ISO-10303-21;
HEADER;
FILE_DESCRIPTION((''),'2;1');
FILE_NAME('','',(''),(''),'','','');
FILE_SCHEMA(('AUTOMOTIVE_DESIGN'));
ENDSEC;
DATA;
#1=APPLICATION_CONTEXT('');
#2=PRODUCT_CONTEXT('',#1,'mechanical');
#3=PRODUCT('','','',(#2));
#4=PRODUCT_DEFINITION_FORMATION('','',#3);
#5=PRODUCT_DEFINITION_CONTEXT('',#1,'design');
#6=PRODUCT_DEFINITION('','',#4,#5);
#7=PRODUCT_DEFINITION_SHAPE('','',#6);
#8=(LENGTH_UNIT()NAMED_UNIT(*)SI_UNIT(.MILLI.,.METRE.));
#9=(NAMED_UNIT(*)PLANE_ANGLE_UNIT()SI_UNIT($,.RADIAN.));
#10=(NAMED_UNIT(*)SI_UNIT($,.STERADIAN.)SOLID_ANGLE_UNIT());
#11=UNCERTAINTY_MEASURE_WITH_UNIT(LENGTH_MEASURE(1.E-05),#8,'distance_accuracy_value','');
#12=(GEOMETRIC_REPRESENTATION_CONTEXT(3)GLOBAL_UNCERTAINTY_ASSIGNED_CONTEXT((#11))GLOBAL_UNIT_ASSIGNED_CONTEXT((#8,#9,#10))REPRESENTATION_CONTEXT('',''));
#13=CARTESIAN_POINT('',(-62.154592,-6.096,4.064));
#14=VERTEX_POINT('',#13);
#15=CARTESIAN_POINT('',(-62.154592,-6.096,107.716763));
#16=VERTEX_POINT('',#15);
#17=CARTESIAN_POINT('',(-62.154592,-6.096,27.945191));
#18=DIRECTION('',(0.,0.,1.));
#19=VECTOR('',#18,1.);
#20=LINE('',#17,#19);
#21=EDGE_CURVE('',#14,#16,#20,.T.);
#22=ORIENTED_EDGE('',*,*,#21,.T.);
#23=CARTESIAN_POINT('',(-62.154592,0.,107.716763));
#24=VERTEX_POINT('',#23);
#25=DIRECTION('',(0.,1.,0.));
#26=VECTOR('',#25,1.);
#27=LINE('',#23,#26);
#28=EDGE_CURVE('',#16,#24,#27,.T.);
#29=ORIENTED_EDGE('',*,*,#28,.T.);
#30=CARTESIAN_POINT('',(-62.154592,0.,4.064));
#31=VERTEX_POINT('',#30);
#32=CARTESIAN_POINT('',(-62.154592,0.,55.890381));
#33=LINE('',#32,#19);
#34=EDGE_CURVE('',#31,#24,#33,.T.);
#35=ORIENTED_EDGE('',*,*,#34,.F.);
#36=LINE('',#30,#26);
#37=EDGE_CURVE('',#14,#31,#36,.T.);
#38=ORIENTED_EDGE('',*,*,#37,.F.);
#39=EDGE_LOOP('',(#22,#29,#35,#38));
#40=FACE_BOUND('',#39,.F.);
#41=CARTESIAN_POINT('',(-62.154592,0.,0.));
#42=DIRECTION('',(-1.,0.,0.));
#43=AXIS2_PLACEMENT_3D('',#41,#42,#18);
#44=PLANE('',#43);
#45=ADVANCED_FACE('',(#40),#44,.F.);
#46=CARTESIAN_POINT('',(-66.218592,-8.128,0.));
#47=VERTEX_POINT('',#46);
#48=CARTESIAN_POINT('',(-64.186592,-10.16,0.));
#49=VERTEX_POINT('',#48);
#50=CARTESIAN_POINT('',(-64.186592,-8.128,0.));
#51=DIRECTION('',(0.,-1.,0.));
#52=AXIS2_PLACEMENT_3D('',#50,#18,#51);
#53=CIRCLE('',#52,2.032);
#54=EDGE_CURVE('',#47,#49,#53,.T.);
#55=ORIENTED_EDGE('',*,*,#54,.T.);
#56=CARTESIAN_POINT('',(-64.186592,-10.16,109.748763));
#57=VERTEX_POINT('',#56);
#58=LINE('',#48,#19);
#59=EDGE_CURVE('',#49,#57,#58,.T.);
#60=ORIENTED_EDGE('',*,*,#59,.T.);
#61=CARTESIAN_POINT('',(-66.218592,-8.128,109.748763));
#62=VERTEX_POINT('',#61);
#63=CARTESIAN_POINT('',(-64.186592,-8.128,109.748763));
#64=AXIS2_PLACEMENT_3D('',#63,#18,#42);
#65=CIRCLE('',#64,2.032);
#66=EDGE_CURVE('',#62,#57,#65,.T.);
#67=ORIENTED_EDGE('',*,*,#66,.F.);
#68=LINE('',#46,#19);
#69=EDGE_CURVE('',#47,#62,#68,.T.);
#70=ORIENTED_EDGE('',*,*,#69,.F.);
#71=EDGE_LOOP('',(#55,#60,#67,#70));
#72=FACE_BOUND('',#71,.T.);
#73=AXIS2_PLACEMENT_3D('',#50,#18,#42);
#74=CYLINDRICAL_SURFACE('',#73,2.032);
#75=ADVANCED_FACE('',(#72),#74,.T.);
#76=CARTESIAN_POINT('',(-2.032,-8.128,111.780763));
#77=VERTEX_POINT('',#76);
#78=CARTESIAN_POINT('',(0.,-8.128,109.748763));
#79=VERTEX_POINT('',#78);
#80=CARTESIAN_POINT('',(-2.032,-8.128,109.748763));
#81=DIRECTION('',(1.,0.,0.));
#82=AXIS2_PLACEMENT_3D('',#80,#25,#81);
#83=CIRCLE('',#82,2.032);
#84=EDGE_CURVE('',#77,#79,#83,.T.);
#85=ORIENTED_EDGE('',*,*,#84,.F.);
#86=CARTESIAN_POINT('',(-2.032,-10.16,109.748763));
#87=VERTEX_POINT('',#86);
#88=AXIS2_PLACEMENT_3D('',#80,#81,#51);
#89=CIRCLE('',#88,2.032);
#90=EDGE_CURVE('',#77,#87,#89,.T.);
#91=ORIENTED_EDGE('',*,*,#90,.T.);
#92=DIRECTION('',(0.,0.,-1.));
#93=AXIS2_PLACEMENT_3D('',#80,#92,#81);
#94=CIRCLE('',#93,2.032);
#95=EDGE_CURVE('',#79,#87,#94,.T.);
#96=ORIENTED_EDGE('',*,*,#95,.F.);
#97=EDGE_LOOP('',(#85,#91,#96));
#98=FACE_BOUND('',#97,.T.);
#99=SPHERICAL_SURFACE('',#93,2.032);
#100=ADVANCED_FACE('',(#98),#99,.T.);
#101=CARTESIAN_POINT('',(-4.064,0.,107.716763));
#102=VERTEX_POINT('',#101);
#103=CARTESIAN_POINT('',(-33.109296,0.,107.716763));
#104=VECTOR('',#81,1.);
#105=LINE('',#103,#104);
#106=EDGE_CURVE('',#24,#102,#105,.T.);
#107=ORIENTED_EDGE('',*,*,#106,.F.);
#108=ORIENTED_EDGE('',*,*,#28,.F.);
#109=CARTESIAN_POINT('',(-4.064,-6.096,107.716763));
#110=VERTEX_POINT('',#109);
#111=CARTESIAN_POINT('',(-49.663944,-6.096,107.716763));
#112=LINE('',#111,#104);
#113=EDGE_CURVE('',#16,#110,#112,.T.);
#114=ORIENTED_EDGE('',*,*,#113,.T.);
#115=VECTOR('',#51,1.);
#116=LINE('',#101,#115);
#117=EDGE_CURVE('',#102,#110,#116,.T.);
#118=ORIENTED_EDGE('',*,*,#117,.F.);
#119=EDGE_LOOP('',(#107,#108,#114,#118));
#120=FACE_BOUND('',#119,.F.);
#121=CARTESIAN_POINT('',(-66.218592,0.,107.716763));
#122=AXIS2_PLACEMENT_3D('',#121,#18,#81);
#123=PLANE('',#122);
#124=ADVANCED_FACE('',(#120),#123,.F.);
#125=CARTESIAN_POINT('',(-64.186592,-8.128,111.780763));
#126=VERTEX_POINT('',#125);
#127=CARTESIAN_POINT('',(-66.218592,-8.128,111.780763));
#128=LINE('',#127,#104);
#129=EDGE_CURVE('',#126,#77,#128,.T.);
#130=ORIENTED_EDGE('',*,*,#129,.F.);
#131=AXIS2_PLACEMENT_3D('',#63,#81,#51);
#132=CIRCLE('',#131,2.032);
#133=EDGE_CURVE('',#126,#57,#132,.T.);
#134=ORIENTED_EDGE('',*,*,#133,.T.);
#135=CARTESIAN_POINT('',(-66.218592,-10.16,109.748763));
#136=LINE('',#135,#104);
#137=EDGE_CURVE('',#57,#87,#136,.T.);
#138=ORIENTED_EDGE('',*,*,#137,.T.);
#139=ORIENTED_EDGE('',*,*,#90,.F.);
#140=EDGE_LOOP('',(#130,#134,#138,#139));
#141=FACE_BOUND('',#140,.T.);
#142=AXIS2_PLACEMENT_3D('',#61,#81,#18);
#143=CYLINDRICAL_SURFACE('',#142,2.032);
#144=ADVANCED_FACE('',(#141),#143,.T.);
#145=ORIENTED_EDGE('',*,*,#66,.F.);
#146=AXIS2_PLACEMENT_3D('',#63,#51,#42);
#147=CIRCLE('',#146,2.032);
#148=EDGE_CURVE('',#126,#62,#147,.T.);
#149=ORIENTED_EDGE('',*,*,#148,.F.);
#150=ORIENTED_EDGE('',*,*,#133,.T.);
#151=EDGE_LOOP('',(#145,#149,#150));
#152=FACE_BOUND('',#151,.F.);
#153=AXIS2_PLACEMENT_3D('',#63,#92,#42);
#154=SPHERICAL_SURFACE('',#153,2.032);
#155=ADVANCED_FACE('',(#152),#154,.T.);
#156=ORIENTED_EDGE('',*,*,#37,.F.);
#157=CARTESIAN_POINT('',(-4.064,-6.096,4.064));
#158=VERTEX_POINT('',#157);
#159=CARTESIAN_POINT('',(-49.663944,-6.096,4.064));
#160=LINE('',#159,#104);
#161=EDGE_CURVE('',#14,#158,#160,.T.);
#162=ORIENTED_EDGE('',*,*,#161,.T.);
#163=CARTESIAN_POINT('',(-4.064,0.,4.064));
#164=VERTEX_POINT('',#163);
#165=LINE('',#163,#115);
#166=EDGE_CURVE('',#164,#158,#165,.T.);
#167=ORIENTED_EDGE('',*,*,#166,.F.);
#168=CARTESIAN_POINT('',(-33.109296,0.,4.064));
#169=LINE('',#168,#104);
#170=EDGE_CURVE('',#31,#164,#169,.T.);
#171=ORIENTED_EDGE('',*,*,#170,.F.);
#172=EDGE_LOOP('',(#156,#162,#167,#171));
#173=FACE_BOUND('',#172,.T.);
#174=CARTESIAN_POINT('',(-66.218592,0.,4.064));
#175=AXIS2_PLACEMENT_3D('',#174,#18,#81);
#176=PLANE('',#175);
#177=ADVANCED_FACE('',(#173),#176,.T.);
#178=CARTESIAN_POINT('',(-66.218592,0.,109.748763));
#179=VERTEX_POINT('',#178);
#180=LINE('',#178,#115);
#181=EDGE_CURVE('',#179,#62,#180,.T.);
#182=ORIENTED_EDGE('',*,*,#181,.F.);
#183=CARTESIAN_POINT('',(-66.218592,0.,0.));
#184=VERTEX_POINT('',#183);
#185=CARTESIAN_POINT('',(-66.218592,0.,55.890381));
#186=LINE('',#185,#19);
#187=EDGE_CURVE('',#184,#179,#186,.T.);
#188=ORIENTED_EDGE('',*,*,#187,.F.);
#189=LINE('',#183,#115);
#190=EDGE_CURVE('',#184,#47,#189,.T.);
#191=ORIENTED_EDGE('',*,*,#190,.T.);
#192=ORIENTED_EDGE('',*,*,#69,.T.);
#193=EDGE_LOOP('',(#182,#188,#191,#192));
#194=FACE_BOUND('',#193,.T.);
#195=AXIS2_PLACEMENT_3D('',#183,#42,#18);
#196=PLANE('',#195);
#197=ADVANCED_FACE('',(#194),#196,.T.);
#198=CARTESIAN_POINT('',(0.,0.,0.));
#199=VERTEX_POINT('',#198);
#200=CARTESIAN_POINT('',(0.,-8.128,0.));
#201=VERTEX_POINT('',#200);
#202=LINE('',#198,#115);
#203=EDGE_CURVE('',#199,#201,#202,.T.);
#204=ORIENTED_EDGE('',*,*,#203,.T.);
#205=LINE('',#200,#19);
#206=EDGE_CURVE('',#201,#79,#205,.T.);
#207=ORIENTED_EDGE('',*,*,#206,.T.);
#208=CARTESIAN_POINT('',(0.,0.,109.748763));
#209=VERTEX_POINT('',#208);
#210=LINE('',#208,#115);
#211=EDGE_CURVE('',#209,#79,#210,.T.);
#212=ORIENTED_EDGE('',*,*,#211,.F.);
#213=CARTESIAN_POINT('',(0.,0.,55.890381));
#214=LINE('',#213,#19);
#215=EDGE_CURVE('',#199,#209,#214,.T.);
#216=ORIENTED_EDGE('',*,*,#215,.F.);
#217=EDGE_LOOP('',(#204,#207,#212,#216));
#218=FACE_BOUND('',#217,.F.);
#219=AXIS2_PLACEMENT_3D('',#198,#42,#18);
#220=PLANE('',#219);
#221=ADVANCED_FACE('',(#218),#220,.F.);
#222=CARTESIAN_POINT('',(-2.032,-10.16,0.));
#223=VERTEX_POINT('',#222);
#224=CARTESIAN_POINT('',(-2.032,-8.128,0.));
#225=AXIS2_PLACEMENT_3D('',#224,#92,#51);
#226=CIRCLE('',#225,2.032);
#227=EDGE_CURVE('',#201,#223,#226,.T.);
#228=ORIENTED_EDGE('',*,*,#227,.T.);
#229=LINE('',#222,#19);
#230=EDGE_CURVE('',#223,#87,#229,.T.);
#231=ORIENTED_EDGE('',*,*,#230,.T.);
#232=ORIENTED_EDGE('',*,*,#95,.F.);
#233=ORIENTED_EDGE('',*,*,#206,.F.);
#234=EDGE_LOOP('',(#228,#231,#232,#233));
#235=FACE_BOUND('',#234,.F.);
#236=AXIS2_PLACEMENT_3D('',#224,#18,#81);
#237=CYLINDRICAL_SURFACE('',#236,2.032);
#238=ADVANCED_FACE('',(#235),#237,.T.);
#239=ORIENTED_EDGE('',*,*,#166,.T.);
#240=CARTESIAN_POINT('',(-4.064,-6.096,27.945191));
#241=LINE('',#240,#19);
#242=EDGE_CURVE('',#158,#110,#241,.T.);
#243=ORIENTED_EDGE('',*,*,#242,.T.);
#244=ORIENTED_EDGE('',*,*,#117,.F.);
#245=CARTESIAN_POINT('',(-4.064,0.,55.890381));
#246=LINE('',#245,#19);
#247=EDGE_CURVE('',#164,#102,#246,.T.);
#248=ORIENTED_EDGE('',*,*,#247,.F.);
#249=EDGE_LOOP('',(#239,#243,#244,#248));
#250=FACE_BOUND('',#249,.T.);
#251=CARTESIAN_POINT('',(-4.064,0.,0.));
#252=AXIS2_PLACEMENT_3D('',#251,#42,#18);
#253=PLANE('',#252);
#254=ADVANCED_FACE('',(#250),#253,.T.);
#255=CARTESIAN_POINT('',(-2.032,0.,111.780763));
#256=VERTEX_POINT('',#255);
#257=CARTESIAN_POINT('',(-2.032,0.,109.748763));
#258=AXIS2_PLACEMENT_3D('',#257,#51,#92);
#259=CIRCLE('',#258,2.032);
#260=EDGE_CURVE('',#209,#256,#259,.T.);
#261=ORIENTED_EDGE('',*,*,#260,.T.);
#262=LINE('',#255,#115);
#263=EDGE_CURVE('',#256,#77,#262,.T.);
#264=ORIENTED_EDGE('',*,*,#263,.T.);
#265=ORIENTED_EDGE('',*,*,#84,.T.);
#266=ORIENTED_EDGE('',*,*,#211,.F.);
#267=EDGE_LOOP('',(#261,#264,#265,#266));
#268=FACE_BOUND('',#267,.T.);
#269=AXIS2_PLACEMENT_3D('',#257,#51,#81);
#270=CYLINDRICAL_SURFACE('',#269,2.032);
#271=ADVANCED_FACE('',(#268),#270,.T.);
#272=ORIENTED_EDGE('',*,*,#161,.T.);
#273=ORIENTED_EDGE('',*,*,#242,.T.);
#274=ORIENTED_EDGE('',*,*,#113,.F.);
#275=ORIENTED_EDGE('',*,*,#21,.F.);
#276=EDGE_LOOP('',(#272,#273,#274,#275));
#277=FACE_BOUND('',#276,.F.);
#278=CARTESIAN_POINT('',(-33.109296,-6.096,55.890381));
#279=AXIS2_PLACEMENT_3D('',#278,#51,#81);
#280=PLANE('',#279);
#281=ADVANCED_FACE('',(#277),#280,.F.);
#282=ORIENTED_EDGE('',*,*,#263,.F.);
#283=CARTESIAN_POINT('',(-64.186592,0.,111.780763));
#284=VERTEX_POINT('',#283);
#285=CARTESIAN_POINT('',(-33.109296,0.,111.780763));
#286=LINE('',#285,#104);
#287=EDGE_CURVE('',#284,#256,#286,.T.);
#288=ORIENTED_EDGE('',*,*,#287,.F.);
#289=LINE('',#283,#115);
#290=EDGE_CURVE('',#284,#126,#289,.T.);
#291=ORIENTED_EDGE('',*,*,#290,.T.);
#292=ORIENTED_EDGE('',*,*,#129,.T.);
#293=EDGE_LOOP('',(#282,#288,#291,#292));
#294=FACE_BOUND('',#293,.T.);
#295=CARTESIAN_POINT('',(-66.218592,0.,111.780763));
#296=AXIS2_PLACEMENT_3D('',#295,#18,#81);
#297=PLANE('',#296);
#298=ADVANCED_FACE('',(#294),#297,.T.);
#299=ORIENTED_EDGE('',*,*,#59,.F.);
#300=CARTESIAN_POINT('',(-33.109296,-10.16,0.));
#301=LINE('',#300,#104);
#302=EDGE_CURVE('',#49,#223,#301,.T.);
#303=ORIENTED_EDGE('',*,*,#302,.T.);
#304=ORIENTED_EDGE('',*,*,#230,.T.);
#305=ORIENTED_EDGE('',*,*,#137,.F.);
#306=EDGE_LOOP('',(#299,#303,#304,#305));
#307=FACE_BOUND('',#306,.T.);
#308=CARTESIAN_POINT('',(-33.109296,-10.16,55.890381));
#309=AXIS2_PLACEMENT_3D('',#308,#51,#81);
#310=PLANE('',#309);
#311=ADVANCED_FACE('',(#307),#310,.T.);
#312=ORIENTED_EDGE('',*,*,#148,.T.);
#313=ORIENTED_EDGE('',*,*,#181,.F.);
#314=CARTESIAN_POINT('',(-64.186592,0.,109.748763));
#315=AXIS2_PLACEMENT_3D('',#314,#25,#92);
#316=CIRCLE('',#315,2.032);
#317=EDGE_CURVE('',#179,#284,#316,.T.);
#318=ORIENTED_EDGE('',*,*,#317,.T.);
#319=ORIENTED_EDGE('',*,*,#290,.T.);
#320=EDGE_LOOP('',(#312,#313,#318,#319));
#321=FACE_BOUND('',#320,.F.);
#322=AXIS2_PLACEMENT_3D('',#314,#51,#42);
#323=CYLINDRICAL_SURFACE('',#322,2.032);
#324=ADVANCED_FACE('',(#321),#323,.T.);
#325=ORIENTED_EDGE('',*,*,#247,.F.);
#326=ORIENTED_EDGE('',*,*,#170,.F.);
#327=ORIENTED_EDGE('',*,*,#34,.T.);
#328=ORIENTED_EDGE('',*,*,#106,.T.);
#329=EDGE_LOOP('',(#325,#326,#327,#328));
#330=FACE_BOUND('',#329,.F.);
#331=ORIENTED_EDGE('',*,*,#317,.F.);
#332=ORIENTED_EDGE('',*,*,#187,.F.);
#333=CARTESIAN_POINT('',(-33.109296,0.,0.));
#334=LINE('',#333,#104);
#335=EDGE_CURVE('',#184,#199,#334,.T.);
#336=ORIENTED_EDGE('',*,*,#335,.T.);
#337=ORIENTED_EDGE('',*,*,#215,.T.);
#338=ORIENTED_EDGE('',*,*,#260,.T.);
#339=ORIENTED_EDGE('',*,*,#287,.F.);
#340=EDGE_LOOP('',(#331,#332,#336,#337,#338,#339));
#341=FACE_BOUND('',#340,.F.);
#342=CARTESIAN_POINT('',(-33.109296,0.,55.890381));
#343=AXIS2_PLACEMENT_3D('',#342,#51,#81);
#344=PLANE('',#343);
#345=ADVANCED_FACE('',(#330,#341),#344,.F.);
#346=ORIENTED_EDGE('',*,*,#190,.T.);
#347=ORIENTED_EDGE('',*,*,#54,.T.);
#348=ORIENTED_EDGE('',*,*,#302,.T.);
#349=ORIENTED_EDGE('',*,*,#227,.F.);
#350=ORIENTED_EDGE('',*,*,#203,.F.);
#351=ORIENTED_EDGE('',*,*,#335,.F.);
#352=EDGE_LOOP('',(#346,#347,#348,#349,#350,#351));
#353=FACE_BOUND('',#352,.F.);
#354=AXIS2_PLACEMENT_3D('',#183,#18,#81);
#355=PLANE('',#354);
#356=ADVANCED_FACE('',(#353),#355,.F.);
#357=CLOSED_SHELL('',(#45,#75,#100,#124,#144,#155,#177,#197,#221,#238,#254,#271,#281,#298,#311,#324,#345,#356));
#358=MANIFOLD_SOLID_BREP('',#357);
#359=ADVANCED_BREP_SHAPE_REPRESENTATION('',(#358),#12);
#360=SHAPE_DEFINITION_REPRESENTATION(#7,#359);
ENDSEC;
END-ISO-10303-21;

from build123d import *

# Parameters (mm, degrees)
F0_W     = 66.2185922265
F0_H     = 111.7807626724
F1_DEPTH = 10.16
F2_R     = 2.032
F3_T     = -4.064


# Not quite as in the source:
# - two fillets or chamfers of one size are made in one step


with BuildPart() as f1:
    # F0 (on Front) → F1 (new body)
    with BuildSketch(Plane.XZ):
        with Locations((-33.1092961133, 55.8903813362)):
            Rectangle(F0_W, F0_H)
    extrude(amount=F1_DEPTH)

    # F2
    f2_edges = [f1.edges().sort_by_distance(p)[0] for p in [
        (0, -10.16, 55.890381),
        (-66.218592, -10.16, 55.890381),
        (0, -5.08, 111.780763),
        (-66.218592, -5.08, 111.780763),
        (-33.109296, -10.16, 111.780763),
    ]]
    fillet(f2_edges, radius=F2_R)

    # F3
    f3_openings = [f1.faces().sort_by_distance(p)[0] for p in [
        (-33.109296, 0, 55.877105),
    ]]
    offset(amount=F3_T, openings=f3_openings)


solid = f1.part
